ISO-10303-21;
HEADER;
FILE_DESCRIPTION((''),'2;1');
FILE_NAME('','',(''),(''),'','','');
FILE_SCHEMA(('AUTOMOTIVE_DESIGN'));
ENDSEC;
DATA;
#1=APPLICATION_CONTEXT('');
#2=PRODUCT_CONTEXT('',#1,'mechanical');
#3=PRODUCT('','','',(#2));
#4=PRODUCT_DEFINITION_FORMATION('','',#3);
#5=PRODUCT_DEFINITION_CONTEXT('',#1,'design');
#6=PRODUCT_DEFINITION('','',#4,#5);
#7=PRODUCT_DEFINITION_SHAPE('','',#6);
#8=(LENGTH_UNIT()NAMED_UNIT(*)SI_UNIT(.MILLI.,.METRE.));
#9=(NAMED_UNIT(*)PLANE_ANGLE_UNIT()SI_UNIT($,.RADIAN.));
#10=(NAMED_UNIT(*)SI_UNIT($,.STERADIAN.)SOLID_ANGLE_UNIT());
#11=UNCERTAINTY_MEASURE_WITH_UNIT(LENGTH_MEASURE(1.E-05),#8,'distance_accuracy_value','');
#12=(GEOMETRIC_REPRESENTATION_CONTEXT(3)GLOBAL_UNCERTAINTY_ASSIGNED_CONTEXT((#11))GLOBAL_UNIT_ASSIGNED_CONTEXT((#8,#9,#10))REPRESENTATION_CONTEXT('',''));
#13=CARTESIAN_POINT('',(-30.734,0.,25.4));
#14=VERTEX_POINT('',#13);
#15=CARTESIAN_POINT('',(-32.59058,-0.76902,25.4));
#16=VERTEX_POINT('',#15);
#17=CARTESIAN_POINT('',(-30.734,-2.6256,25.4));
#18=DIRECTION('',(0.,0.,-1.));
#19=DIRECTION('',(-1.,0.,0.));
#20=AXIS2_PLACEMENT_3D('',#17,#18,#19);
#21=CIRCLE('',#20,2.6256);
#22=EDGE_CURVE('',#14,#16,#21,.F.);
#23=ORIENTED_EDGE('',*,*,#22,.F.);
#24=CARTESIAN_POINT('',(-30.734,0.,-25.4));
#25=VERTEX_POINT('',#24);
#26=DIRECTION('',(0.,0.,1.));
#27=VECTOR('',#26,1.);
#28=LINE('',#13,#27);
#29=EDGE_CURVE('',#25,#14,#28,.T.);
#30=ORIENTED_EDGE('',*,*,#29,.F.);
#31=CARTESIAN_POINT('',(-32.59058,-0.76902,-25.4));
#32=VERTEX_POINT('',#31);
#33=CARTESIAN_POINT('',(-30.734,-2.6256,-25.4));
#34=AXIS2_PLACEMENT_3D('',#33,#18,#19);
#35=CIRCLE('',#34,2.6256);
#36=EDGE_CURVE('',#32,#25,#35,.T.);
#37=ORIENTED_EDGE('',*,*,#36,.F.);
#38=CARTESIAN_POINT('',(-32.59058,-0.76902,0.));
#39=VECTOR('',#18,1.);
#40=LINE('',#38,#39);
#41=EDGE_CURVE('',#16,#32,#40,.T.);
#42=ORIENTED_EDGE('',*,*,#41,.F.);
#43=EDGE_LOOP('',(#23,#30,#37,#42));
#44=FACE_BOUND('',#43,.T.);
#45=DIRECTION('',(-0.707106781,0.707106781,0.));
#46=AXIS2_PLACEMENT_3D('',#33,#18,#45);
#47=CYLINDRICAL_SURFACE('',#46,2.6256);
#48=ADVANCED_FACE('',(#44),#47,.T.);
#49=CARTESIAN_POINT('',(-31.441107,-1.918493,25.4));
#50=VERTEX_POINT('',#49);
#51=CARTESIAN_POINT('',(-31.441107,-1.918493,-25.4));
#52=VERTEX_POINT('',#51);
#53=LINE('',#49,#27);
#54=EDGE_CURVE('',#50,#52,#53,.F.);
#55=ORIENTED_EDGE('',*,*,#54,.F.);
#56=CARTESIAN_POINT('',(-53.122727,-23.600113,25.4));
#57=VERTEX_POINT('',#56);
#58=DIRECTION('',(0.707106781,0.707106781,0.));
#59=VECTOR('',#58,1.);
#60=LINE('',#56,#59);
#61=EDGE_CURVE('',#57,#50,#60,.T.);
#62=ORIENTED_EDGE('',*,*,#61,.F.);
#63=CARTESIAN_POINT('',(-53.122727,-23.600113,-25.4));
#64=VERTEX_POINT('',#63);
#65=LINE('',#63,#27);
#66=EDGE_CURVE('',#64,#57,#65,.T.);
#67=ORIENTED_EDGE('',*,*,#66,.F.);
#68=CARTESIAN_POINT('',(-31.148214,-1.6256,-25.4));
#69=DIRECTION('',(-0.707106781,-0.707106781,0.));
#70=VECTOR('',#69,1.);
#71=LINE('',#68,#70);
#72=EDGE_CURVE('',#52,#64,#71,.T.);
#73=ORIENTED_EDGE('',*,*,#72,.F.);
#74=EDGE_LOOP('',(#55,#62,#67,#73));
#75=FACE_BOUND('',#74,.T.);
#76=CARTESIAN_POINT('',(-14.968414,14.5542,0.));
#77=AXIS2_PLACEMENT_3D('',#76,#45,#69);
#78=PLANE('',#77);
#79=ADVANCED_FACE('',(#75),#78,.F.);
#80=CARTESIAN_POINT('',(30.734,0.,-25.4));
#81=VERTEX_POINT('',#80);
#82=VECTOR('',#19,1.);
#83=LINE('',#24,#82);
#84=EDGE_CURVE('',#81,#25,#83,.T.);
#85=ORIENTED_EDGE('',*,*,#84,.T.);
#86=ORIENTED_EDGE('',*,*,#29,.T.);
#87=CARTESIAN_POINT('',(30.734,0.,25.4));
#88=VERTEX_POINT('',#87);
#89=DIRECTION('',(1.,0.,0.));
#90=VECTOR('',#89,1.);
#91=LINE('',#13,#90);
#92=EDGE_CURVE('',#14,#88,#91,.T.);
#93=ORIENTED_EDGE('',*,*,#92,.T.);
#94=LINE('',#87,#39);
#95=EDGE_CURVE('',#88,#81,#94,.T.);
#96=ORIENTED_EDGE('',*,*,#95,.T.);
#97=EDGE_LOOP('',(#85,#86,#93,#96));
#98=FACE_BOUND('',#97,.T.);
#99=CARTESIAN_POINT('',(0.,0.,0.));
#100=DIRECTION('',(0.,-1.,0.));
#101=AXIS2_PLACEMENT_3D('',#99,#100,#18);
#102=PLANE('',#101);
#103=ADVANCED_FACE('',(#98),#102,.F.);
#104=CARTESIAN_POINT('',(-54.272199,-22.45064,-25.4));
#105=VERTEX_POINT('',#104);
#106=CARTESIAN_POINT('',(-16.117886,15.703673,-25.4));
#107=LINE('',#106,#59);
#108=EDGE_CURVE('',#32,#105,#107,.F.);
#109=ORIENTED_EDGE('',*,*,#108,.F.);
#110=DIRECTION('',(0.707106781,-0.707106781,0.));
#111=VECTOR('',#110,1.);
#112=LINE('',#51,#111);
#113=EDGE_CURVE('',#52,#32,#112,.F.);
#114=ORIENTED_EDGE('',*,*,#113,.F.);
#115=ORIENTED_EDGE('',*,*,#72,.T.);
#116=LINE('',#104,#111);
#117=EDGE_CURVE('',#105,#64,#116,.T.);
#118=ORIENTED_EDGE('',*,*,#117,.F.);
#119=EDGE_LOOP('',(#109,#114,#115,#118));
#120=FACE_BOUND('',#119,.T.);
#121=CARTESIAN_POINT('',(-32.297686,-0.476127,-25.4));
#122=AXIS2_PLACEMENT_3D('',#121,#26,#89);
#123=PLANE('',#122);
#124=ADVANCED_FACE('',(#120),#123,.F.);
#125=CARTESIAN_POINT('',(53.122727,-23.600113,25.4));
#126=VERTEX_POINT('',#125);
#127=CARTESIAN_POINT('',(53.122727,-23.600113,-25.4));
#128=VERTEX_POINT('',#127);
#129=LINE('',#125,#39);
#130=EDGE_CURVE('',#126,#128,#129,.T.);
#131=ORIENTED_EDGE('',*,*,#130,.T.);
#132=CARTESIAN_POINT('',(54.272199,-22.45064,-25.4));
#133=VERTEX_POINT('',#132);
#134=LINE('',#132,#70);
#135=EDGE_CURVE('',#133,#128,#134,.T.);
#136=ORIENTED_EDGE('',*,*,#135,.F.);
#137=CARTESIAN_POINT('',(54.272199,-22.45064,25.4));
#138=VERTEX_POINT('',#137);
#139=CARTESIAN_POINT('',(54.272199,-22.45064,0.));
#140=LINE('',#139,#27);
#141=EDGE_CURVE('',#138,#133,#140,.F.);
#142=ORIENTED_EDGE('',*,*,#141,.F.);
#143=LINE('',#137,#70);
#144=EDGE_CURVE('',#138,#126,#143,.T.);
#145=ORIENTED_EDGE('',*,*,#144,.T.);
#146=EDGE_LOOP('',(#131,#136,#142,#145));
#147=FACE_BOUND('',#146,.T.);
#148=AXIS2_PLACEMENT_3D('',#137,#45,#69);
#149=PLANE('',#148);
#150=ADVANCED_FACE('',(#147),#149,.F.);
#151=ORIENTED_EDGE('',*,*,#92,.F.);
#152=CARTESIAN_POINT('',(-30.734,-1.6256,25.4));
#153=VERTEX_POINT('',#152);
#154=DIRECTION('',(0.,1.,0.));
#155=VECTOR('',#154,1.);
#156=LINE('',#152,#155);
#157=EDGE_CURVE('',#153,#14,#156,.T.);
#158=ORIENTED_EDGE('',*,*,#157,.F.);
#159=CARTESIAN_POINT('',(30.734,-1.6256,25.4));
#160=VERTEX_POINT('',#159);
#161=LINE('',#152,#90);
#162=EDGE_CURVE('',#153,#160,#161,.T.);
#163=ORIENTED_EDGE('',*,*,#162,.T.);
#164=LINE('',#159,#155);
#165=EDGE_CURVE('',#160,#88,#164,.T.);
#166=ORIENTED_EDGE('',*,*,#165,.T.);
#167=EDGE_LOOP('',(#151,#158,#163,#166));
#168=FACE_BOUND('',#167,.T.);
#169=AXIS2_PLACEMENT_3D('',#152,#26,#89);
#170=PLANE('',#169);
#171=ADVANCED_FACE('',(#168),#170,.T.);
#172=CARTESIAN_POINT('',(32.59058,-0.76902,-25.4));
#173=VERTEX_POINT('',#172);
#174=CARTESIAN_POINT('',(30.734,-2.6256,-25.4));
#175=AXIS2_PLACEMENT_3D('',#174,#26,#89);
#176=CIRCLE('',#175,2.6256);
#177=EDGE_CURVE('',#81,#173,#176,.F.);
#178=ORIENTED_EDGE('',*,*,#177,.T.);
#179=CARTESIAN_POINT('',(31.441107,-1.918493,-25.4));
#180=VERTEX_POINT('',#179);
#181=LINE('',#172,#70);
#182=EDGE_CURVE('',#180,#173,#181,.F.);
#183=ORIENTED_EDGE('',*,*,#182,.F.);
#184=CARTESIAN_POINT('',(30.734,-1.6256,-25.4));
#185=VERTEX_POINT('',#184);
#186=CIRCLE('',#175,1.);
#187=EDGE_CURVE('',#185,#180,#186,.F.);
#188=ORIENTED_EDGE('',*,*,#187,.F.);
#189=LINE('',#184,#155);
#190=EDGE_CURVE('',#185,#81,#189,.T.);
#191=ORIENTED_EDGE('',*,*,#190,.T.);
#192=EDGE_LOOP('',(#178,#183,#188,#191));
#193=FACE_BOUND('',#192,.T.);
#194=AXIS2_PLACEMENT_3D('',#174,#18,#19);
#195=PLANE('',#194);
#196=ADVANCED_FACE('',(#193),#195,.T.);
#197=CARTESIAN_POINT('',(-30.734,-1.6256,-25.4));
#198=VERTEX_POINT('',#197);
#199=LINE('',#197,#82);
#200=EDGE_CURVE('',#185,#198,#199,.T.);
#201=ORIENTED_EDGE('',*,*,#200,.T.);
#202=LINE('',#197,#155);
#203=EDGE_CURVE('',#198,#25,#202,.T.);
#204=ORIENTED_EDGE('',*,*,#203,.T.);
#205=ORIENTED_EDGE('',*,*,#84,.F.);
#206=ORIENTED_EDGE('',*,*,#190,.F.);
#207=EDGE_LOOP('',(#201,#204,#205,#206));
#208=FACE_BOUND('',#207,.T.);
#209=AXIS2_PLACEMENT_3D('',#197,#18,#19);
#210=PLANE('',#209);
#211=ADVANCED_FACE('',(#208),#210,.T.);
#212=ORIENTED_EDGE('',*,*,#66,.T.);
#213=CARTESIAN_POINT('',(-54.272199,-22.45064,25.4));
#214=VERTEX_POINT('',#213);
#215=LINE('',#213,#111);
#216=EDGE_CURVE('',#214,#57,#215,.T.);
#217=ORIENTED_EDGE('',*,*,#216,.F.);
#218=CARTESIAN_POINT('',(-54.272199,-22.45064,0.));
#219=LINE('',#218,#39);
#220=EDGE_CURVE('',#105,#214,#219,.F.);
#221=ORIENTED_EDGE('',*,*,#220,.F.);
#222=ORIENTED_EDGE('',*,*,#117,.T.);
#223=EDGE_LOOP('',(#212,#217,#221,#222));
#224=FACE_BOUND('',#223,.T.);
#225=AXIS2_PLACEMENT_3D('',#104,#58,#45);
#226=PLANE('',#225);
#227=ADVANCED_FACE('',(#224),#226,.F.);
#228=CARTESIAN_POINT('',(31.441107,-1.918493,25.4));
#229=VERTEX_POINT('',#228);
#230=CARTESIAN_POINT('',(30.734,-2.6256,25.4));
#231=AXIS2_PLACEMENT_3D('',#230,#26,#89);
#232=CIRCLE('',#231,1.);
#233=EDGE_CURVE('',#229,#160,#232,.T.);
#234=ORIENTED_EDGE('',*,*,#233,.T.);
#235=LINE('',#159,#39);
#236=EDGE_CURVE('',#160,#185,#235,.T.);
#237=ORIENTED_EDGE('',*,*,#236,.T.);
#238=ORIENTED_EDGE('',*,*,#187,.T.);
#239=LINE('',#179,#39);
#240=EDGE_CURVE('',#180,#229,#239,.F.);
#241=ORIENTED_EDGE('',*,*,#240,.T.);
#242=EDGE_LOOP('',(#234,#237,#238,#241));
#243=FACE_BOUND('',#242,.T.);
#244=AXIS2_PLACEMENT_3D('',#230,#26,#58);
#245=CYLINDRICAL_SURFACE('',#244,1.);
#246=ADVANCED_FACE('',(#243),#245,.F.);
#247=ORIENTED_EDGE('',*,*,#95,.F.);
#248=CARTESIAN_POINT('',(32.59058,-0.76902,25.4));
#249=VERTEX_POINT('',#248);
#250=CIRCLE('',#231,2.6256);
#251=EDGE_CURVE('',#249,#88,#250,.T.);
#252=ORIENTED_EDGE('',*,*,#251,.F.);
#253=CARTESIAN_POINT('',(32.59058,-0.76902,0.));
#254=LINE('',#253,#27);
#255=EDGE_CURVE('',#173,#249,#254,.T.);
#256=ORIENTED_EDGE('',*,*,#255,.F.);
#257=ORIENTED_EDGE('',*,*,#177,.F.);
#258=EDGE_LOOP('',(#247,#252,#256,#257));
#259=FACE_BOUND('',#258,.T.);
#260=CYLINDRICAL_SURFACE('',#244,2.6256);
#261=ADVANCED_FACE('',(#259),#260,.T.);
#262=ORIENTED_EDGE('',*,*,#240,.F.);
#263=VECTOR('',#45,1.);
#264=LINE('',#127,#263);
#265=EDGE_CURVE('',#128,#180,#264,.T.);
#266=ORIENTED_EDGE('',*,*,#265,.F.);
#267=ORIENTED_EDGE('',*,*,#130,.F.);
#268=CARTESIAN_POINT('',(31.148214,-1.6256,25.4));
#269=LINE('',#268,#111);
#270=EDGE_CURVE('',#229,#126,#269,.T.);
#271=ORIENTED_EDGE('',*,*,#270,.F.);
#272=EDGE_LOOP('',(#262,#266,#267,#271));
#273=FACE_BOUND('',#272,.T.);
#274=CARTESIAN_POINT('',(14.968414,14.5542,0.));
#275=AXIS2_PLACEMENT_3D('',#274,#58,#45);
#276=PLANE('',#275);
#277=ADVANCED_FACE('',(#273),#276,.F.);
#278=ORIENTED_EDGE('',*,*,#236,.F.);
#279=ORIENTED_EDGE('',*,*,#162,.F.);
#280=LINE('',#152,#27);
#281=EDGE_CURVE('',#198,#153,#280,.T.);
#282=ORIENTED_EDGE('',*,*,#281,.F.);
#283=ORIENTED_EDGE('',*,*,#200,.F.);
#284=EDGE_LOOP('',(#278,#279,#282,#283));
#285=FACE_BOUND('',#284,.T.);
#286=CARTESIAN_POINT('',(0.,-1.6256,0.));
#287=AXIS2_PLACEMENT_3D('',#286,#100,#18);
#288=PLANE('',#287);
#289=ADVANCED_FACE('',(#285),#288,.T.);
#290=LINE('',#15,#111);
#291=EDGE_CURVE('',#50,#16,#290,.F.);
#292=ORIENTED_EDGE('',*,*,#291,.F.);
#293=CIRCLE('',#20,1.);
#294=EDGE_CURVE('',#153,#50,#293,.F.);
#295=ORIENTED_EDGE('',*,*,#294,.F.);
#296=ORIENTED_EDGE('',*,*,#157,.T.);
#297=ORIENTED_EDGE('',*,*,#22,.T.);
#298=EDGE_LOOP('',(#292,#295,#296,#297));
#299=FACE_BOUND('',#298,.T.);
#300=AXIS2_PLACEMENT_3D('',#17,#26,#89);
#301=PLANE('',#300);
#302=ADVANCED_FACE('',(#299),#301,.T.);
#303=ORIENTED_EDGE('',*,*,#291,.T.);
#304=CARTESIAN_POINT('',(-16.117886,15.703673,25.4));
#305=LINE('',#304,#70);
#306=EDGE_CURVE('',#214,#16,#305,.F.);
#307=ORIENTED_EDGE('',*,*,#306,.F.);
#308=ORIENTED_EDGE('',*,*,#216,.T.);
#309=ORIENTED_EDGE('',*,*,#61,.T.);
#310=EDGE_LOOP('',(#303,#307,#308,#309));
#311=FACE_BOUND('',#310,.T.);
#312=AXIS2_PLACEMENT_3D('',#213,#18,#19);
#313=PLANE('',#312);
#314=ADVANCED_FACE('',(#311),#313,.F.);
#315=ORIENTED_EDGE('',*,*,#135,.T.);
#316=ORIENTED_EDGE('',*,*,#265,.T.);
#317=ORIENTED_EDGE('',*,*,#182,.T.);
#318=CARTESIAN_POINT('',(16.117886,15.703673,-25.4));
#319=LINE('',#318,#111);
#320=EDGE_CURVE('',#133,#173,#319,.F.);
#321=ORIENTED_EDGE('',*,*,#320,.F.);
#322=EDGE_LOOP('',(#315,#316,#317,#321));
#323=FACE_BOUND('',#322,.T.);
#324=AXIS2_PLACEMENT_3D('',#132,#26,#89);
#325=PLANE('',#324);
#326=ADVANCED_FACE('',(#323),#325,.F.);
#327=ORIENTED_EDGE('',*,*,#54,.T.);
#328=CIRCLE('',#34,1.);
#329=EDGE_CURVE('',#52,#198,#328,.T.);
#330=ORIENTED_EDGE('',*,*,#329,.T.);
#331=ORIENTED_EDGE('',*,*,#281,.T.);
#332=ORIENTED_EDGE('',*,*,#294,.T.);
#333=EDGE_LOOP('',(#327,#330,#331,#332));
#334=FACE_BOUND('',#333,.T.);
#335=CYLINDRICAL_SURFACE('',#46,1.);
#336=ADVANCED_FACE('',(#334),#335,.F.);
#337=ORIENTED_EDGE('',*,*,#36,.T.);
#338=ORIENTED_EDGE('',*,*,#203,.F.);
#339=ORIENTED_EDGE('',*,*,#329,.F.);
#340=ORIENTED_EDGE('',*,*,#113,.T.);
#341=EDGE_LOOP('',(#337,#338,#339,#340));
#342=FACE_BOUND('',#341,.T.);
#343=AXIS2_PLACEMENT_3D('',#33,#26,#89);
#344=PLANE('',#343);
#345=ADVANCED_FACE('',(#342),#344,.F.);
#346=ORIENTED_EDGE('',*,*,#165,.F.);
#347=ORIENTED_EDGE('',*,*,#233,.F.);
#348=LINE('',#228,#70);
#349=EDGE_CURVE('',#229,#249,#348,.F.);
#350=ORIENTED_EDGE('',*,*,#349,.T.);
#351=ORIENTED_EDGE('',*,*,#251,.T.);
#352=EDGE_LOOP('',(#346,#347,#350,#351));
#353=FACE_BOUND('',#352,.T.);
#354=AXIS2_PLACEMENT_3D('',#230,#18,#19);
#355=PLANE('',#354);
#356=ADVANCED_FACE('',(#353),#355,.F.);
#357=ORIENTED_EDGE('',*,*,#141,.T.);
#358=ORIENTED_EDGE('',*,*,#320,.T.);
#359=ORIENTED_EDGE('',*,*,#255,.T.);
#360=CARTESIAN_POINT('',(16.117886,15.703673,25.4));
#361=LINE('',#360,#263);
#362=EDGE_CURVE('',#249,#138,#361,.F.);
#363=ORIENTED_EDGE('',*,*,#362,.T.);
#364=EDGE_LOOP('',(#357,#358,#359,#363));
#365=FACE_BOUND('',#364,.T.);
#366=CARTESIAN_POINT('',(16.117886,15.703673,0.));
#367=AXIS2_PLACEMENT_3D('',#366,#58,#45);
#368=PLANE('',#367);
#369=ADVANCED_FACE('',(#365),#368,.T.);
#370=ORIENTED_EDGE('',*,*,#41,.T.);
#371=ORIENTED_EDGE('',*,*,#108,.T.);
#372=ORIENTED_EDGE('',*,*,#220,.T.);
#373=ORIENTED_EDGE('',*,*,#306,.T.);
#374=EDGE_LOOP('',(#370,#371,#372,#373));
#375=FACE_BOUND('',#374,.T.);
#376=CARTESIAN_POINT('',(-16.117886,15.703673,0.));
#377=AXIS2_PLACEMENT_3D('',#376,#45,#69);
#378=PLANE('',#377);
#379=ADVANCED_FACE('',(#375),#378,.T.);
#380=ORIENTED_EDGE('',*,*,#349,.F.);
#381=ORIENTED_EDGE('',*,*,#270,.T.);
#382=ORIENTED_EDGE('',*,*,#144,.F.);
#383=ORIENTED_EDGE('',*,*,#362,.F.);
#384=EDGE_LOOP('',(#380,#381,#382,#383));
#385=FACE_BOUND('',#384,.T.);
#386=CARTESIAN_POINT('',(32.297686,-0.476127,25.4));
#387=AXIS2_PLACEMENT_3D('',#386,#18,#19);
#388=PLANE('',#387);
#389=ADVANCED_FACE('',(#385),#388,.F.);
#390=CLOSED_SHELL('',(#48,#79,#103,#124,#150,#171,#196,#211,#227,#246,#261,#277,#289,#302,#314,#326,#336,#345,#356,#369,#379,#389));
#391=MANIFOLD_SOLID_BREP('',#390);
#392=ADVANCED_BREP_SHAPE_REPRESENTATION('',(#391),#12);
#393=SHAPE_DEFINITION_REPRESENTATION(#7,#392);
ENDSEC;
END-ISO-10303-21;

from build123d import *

# Parameters (mm, degrees)
SKETCH7_W               = 61.468
SKETCH7_H               = 50.8
BASE_FLANGE2_DEPTH      = 1.6256
EDGE_FLANGE1_DEPTH      = 50.8
EDGE_FLANGE1_BEND_DEPTH = 50.8


# Sheet-metal steps are written as plain solids
with BuildPart() as part:
    # Sketch7 → Base-Flange2 (new body)
    with BuildSketch(Plane(origin=(0, 0, 0), x_dir=(1, 0, 0), z_dir=(0, 1, 0))):
        Rectangle(SKETCH7_W, SKETCH7_H)
    extrude(amount=-BASE_FLANGE2_DEPTH)

    # Edge-Flange1 section (across the edge) → Edge-Flange1 (add)
    with BuildSketch(Plane(origin=(-31.148213562, -1.6256, 25.4), x_dir=(0.7071067811865438, -0.7071067811865512, 0), z_dir=(0, 0, -1))):
        with BuildLine():
            Line((-1.6256, 0.414213562), (-1.6256, 31.076654433))
            Line((-1.6256, 31.076654433), (0, 31.076654433))
            Line((0, 31.076654433), (0, 0.414213562))
            ThreePointArc((0, 0.414213562), (0.076120467, 0.03153013), (0.292893219, -0.292893219))
            Line((0.292893219, -0.292893219), (-0.856579565, -1.442366002))
            ThreePointArc((-0.856579565, -1.442366002), (-1.425738101, -0.590560058), (-1.6256, 0.414213562))
        make_face()
    extrude(amount=EDGE_FLANGE1_DEPTH)

    # Edge-Flange1 section 2 (across the edge) → Edge-Flange1 bend (add)
    with BuildSketch(Plane(origin=(31.148213562, -1.6256, -25.4), x_dir=(-0.7071067811865438, -0.7071067811865512, 0), z_dir=(0, 0, 1))):
        with BuildLine():
            Line((-1.6256, 0.414213562), (-1.6256, 31.076654433))
            Line((-1.6256, 31.076654433), (0, 31.076654433))
            Line((0, 31.076654433), (0, 0.414213562))
            ThreePointArc((0, 0.414213562), (0.076120467, 0.03153013), (0.292893219, -0.292893219))
            Line((0.292893219, -0.292893219), (-0.856579565, -1.442366002))
            ThreePointArc((-0.856579565, -1.442366002), (-1.425738101, -0.590560058), (-1.6256, 0.414213562))
        make_face()
    extrude(amount=EDGE_FLANGE1_BEND_DEPTH)


solid = part.part
